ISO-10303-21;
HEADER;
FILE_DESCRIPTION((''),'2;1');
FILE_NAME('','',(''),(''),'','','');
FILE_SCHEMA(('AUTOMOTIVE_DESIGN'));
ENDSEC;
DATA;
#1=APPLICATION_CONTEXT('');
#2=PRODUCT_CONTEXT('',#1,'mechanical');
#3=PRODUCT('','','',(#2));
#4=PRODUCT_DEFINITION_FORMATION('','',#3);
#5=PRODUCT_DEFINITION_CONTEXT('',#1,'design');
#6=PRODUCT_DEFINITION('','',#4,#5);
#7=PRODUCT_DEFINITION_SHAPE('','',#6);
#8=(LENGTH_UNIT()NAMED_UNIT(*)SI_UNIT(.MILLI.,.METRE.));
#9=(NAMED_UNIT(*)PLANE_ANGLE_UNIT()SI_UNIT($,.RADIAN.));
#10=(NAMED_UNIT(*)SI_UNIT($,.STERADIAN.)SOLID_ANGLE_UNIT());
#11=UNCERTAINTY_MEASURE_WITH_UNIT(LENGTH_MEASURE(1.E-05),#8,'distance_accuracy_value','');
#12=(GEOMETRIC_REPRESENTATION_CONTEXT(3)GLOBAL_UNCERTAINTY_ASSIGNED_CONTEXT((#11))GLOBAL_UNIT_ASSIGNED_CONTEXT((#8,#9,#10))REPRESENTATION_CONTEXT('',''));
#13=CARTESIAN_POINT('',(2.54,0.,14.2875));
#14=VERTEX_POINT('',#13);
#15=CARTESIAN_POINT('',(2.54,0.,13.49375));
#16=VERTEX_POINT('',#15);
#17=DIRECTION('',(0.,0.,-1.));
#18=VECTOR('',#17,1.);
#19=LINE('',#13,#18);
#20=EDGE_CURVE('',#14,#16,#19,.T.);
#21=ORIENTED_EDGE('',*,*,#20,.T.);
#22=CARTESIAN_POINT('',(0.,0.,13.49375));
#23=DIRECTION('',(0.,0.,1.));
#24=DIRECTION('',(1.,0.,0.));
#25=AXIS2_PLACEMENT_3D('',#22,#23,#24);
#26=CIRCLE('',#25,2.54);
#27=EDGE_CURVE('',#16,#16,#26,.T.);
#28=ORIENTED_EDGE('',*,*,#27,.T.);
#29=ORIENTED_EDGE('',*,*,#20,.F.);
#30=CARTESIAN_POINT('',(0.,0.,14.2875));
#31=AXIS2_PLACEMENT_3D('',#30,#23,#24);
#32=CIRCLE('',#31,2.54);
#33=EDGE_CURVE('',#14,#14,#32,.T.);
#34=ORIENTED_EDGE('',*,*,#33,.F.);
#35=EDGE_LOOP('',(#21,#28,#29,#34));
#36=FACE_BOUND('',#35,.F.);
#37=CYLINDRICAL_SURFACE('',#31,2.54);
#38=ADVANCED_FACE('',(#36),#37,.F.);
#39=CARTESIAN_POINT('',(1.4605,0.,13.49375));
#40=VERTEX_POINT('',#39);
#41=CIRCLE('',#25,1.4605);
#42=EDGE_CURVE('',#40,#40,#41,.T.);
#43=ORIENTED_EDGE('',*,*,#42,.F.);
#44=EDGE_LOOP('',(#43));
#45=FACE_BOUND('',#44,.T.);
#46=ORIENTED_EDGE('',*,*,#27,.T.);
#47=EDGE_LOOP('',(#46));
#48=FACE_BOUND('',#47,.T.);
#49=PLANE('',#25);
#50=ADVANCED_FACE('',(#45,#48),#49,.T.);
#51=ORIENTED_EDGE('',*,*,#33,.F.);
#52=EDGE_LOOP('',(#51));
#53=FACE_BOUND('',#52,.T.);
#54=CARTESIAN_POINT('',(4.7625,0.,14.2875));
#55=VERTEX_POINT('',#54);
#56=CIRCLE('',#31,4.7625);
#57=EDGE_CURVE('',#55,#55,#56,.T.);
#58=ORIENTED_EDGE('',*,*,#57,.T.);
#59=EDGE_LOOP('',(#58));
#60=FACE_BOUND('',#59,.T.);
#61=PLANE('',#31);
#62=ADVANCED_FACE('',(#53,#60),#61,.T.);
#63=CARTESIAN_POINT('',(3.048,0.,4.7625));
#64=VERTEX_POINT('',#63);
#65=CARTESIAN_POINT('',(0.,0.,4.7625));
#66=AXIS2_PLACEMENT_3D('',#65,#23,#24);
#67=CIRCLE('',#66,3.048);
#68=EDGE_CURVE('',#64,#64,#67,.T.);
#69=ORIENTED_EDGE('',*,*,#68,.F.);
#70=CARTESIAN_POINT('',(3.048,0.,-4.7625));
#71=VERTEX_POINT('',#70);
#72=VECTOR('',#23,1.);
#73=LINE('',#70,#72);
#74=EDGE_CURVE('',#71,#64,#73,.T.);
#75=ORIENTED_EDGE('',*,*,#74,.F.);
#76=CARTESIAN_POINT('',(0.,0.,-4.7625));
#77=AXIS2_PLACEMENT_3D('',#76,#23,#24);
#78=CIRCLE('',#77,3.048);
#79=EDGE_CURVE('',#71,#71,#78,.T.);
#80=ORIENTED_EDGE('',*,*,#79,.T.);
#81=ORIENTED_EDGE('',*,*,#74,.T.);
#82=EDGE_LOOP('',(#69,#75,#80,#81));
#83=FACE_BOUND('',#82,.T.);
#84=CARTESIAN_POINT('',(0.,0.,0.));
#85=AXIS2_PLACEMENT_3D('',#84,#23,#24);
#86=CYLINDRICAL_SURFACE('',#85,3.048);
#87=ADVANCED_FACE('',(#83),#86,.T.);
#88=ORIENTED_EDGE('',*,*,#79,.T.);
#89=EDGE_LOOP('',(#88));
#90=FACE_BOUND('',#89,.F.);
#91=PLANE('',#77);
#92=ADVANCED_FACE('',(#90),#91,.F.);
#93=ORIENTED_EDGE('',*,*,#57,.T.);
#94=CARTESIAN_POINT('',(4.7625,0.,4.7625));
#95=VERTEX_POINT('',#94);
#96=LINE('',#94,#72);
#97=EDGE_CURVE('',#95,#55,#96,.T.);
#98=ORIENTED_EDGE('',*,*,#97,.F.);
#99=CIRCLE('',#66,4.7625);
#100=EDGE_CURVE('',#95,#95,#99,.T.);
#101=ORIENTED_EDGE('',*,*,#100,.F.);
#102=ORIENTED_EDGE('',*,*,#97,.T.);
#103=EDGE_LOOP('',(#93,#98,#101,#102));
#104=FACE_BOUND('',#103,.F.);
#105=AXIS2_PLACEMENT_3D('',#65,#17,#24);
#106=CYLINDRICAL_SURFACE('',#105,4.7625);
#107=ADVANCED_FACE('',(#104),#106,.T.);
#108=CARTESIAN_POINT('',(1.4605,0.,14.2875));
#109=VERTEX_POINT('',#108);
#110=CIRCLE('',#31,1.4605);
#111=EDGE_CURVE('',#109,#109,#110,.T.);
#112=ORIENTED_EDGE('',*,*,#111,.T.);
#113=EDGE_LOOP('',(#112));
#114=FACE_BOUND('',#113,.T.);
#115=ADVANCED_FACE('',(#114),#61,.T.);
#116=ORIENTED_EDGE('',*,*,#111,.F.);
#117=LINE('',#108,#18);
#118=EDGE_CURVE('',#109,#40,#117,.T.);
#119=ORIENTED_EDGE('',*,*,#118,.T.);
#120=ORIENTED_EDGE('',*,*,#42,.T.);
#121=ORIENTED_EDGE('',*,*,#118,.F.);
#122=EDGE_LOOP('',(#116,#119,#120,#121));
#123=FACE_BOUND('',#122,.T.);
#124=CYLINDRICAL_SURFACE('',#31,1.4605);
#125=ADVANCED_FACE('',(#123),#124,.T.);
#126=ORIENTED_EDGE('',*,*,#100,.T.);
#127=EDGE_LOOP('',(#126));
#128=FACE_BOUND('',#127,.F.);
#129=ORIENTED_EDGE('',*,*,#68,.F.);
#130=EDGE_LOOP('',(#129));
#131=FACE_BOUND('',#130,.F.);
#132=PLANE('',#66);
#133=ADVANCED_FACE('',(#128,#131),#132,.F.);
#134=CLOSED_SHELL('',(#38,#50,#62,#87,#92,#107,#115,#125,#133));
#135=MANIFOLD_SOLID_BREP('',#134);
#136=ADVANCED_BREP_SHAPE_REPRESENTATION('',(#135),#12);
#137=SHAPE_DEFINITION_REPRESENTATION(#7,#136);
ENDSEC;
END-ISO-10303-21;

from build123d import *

# Parameters (mm, degrees)
F0_R     = 3.048
F1_DEPTH = 4.7625
F2_R     = 4.7625
F3_DEPTH = 9.525
F4_R     = 2.54
F4_R_2   = 1.4605
F5_DEPTH = 0.79375


# Not quite as in the source:
# - a length typed as a fraction of an inch, garbled in the dataset ("3 / 203.2 mm" for 3/8 in), is restored


with BuildPart() as f1:
    # F0 (on Top) → F1 (new body, symmetric)
    with BuildSketch(Plane.XY):
        Circle(F0_R)
    extrude(amount=F1_DEPTH, both=True)

    # F2 (on face) → F3 (join)
    with BuildSketch(Plane.XY.offset(4.7625)):
        Circle(F2_R)
    extrude(amount=F3_DEPTH)

    # F4 (on face) → F5 (cut)
    with BuildSketch(Plane.XY.offset(14.2875)):
        Circle(F4_R)
        Circle(F4_R_2, mode=Mode.SUBTRACT)
    extrude(amount=-F5_DEPTH, mode=Mode.SUBTRACT)


solid = f1.part
